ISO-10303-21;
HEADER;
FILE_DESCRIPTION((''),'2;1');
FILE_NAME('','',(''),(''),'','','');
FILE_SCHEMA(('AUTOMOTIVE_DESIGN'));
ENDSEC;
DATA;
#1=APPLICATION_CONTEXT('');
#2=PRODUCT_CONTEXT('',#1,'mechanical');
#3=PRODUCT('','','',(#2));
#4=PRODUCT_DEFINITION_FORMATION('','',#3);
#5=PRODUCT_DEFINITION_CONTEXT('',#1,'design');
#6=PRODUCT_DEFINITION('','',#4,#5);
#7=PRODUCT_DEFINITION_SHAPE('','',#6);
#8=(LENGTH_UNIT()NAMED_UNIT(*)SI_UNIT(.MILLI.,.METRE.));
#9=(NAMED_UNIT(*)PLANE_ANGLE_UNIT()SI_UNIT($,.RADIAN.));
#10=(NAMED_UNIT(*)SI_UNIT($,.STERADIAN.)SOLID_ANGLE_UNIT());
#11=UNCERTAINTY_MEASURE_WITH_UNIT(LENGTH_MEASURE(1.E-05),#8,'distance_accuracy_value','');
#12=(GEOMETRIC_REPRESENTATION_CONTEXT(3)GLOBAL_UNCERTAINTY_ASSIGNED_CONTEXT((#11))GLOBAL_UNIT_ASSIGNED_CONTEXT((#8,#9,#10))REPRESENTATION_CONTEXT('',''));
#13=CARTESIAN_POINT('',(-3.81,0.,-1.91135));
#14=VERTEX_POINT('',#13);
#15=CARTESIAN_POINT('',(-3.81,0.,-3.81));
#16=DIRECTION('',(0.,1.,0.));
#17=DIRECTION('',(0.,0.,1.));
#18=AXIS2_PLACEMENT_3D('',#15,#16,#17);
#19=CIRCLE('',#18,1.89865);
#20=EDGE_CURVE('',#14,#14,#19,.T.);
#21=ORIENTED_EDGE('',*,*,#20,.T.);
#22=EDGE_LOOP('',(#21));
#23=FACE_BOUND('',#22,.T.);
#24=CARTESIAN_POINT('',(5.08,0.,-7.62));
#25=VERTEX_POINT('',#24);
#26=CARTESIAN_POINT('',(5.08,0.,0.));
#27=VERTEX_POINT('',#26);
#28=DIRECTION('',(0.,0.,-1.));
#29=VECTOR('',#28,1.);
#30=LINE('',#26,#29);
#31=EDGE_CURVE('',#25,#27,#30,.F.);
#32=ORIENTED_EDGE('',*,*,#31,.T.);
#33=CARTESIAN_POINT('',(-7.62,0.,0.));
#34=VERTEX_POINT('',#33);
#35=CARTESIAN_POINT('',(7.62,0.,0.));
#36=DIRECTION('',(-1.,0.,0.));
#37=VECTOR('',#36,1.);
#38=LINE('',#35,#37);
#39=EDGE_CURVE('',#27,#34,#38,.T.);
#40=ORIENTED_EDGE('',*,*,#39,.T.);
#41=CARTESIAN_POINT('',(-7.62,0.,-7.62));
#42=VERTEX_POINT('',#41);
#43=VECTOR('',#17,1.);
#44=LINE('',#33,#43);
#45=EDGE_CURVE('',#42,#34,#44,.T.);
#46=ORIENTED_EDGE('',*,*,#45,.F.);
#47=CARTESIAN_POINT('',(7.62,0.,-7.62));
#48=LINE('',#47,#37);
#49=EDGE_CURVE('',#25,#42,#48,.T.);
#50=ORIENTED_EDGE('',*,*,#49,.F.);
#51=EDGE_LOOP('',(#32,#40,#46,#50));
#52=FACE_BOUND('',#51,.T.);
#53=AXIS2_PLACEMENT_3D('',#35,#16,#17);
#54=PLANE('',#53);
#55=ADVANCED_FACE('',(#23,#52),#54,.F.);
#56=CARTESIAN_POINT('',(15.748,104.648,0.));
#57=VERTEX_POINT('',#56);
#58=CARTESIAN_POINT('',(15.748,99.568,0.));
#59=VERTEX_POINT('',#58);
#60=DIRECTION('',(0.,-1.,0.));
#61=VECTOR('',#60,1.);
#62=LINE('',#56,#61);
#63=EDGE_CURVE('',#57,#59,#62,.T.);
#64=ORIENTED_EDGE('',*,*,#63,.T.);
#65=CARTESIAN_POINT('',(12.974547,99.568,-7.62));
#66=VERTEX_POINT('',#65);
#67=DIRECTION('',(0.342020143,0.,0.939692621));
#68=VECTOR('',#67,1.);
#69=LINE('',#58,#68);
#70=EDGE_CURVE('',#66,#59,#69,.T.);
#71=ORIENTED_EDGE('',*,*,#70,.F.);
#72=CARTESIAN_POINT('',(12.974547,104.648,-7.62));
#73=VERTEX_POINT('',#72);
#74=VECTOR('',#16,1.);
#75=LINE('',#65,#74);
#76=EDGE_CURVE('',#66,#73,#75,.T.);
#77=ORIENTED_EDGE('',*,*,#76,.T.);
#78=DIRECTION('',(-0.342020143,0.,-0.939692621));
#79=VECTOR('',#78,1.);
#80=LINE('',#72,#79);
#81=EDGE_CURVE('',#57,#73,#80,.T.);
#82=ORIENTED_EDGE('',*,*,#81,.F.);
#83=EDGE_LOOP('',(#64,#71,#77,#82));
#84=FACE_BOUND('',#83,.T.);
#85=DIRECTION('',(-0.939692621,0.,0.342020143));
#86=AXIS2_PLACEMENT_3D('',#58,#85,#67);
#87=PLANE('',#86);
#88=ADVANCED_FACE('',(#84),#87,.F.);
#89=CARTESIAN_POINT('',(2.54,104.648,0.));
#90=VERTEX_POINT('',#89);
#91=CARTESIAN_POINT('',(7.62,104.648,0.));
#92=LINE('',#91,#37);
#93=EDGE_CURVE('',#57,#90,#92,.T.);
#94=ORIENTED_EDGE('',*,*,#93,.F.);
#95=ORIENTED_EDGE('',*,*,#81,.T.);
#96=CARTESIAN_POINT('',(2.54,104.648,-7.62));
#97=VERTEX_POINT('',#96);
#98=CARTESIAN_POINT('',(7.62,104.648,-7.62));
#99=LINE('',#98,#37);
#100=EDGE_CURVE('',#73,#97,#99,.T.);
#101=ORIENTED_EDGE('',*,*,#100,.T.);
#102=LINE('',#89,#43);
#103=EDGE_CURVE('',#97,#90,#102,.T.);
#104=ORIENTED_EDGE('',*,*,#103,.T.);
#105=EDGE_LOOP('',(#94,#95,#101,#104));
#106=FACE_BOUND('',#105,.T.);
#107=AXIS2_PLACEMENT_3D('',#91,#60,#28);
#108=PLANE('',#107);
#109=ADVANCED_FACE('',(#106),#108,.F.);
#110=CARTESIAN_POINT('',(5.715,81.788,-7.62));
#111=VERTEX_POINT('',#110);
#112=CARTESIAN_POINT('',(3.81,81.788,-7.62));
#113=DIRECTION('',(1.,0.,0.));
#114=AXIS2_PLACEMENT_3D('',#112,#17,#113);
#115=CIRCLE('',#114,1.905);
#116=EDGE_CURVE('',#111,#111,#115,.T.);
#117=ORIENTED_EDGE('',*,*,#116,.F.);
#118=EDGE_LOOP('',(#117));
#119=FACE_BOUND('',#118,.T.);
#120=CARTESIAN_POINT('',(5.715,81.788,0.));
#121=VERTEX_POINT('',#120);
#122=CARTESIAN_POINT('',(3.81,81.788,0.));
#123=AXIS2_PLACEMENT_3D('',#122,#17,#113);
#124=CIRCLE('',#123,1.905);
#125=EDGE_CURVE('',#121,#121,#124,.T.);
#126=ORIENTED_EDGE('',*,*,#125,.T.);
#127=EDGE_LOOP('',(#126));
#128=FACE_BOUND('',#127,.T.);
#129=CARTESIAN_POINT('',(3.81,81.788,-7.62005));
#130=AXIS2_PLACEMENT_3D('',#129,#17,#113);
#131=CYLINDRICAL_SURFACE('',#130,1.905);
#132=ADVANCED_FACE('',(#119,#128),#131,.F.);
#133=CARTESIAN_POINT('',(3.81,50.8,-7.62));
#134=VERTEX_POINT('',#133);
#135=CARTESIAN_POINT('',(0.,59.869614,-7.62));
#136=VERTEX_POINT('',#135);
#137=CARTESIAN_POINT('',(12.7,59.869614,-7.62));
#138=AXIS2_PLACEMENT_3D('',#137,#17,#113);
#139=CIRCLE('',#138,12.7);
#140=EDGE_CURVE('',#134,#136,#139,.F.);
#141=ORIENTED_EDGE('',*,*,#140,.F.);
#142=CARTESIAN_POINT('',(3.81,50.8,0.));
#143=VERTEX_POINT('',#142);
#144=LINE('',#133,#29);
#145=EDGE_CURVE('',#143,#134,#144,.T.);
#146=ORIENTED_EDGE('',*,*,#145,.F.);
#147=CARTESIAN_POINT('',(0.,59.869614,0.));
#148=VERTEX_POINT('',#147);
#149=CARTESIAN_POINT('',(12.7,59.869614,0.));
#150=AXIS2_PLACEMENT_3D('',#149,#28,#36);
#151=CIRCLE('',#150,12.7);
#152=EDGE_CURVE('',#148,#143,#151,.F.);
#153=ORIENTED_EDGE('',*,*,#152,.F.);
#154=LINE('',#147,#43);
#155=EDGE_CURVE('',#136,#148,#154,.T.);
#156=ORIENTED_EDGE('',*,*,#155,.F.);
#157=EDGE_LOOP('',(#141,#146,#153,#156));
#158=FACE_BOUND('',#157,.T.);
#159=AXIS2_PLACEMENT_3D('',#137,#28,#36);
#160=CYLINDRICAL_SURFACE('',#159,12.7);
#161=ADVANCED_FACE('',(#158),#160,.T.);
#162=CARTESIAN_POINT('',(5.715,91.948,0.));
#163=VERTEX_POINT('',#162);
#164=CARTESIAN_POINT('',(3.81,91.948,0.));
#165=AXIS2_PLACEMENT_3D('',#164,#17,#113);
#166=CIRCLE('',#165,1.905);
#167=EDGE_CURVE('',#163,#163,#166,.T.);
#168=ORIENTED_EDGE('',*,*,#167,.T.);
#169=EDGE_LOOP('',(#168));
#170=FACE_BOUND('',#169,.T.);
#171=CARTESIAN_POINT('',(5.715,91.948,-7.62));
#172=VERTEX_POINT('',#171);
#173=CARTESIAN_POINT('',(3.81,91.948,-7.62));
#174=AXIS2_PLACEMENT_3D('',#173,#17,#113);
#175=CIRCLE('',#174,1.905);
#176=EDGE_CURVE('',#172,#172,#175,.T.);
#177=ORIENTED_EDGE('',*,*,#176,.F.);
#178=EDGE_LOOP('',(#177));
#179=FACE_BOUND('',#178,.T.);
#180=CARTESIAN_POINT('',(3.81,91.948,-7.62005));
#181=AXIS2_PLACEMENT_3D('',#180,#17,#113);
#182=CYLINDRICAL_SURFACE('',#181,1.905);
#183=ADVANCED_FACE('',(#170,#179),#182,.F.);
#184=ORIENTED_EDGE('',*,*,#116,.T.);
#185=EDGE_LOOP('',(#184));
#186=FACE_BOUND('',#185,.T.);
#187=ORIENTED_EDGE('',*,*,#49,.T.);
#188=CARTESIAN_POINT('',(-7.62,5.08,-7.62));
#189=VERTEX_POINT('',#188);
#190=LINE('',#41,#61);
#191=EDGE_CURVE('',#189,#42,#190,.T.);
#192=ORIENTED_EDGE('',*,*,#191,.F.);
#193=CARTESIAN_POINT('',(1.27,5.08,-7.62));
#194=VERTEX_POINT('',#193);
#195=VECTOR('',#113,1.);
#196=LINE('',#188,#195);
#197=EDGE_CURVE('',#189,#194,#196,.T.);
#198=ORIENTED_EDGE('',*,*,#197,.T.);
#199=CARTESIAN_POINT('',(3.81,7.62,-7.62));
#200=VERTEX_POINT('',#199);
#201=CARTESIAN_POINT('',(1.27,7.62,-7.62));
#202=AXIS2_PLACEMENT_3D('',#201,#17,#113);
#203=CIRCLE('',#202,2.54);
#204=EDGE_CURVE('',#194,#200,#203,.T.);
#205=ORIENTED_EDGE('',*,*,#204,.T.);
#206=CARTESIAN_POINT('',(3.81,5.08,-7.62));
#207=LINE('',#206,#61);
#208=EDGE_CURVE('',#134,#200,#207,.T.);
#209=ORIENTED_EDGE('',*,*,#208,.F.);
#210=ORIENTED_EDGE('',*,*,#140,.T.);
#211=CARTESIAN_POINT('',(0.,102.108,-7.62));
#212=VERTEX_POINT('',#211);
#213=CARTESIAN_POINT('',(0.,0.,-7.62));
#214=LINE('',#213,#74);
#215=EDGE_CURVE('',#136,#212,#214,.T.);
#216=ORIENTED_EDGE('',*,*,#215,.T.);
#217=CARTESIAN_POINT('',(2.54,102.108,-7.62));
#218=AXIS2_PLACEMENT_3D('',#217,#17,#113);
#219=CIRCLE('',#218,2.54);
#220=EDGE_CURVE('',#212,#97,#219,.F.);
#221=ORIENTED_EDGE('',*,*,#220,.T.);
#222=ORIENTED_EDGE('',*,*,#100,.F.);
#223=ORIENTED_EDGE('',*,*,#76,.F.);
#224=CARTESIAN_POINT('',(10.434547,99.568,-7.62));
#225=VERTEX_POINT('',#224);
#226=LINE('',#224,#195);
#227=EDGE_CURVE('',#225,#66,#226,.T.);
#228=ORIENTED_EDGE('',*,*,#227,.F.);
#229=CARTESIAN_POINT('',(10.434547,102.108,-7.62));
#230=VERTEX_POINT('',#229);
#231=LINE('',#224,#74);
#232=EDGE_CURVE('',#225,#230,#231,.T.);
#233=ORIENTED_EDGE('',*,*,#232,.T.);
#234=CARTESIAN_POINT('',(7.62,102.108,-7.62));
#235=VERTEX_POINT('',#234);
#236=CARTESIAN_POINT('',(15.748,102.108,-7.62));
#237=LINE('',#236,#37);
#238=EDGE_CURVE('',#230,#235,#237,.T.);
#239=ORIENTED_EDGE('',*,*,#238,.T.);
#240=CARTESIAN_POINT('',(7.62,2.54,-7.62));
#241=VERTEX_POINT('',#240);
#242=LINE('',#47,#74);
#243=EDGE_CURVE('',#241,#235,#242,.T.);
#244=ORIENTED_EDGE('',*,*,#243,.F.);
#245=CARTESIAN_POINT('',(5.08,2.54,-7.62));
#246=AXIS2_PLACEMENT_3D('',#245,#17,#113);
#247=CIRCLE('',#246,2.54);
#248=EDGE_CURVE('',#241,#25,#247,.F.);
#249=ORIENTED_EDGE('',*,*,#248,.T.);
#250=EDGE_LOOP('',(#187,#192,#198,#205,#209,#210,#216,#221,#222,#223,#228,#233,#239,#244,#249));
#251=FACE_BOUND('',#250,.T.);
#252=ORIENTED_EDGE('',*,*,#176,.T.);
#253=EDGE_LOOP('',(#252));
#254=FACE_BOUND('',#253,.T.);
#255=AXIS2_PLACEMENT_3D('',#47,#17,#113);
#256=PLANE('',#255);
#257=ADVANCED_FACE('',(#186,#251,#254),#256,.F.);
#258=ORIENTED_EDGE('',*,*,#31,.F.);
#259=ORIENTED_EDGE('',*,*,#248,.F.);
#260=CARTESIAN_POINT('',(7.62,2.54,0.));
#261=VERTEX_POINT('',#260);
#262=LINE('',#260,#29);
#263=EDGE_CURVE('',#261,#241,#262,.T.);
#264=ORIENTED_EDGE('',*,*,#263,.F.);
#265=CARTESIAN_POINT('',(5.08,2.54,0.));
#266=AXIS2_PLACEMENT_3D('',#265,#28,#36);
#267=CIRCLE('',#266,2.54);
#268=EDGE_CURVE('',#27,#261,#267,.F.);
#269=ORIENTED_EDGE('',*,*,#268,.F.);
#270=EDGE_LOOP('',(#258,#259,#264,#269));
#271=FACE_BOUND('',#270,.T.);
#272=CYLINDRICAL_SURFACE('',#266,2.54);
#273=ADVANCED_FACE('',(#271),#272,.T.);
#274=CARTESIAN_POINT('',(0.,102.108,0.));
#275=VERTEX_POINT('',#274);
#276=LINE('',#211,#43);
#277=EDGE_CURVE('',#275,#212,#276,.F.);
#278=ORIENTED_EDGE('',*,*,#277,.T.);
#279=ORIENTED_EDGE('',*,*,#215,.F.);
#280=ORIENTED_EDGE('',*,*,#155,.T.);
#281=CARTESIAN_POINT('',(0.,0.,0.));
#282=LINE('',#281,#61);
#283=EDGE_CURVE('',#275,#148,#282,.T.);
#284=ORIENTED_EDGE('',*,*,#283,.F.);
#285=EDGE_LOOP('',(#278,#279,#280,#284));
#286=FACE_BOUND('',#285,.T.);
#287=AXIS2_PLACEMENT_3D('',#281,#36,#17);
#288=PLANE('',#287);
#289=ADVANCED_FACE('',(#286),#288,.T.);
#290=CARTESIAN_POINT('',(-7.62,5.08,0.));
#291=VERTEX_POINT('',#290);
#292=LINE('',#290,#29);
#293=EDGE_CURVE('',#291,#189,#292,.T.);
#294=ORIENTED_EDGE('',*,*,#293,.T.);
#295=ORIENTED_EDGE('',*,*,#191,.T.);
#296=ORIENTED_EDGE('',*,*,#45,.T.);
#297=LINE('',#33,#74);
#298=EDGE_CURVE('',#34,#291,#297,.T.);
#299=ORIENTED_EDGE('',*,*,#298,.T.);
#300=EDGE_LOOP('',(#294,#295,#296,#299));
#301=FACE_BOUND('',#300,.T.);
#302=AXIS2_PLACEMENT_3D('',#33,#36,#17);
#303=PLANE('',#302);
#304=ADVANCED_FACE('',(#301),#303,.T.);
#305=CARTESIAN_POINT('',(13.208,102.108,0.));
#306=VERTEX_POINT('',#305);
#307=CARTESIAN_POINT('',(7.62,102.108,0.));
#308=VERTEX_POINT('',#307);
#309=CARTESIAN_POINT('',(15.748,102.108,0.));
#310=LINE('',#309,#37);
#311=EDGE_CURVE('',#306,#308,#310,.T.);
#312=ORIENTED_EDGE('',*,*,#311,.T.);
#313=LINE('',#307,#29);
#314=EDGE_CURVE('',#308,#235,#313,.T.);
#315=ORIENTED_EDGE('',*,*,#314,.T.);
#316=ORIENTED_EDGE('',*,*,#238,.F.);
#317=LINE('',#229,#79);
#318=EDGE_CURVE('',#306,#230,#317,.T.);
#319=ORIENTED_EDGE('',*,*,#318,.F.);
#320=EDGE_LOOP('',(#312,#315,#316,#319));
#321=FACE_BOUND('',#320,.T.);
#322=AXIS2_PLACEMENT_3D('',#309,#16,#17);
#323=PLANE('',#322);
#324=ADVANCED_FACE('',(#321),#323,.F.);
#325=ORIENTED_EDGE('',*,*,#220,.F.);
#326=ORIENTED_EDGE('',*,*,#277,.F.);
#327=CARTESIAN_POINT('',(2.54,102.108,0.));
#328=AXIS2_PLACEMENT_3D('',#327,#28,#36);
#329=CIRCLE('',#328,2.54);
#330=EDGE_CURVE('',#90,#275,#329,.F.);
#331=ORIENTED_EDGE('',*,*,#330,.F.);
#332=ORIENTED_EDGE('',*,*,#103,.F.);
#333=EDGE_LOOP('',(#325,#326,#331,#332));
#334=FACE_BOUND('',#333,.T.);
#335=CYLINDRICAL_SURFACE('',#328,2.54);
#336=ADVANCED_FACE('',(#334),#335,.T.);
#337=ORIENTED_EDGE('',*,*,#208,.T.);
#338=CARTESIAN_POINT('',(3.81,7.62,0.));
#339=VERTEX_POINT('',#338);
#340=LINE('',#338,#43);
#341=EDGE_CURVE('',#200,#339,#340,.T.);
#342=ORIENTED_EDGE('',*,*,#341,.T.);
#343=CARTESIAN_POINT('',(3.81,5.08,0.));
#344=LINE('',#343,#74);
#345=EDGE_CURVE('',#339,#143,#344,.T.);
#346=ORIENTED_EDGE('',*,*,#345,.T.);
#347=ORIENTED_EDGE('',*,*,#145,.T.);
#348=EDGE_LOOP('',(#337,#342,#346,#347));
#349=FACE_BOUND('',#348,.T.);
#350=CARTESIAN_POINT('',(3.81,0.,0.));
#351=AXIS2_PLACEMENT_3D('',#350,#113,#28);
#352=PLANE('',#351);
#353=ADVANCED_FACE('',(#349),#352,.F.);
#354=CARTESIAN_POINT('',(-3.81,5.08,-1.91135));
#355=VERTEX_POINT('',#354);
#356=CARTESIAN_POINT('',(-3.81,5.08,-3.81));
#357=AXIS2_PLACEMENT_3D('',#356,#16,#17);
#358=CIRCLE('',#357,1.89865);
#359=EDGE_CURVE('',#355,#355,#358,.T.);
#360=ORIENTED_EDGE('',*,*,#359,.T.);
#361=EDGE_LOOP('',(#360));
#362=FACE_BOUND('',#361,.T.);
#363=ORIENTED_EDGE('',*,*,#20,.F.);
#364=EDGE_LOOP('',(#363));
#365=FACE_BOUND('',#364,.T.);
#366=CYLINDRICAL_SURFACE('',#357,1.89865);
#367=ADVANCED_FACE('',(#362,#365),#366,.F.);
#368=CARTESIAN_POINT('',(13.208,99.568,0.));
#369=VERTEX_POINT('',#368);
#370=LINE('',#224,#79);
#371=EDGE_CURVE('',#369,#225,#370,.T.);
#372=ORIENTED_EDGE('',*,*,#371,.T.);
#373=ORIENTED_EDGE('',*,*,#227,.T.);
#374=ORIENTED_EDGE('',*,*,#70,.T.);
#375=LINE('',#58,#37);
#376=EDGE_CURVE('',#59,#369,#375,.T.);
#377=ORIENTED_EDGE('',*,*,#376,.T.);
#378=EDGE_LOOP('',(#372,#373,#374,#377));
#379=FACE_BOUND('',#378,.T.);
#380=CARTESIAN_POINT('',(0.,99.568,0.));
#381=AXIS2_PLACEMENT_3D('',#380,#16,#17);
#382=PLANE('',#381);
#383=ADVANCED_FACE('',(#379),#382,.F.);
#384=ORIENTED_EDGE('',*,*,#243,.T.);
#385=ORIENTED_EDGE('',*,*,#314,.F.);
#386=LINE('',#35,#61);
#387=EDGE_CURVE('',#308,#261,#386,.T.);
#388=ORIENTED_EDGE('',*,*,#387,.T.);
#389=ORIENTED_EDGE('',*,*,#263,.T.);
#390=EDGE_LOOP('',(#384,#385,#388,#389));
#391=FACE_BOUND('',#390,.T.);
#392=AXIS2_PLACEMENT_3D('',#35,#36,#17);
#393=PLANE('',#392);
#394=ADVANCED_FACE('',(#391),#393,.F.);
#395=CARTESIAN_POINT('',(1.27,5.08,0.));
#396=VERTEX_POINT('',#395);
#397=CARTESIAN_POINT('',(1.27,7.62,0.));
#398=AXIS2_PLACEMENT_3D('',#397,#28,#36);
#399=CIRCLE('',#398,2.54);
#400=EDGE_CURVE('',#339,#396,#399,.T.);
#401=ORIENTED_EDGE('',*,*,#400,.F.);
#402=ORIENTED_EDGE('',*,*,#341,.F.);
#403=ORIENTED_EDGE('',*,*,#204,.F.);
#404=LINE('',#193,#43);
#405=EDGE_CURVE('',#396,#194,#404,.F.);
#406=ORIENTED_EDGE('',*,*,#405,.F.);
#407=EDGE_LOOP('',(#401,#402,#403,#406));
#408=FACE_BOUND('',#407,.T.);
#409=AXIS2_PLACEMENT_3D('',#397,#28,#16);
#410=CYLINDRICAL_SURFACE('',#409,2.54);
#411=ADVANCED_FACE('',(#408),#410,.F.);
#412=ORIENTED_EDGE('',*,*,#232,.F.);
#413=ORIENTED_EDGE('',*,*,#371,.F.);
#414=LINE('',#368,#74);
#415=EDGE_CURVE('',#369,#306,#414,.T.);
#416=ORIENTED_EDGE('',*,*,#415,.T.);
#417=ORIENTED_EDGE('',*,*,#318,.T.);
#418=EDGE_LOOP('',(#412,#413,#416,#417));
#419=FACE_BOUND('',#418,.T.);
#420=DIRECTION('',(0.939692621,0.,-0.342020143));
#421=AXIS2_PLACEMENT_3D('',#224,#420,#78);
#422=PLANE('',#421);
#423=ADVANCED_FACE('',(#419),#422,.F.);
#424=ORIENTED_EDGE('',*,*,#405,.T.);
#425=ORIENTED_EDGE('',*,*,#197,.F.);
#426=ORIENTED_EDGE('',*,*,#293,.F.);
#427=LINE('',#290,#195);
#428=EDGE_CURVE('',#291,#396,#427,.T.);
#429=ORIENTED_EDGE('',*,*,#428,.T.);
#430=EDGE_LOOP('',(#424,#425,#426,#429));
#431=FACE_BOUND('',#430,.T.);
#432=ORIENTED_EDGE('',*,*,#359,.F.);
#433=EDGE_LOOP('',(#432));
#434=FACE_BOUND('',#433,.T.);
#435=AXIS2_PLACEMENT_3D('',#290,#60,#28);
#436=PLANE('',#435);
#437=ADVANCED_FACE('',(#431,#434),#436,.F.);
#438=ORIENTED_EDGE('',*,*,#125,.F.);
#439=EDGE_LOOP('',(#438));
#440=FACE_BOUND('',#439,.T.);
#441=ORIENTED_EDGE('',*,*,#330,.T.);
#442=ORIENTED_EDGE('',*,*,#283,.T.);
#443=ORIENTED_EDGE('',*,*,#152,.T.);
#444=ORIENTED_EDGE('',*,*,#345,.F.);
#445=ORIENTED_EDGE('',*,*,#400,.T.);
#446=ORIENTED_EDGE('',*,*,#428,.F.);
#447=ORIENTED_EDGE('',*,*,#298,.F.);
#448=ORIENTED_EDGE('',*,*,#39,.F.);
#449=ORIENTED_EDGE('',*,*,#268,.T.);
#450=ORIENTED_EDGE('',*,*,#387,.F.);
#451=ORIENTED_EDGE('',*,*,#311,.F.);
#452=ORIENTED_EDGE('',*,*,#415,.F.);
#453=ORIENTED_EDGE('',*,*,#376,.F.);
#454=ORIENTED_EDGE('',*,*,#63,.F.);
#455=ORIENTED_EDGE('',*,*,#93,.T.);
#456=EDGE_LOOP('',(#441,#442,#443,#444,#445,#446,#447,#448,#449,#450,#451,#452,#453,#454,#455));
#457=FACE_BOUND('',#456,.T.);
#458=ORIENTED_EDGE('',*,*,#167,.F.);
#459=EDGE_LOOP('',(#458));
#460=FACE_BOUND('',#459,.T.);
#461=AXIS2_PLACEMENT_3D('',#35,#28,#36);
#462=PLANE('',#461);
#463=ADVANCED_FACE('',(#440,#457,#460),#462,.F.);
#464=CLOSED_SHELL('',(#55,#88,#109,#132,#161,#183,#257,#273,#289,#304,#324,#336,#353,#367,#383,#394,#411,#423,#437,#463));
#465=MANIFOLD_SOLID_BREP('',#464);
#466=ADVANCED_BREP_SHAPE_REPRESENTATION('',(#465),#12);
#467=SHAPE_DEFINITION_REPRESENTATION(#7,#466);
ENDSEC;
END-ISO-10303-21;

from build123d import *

# Parameters (mm, degrees)
SKETCH1_W             = 7.62
SKETCH1_H             = 104.648
BOSS_EXTRUDE1_DEPTH   = 7.62
SKETCH2_W             = 7.62
SKETCH2_H             = 5.08
BOSS_EXTRUDE2_DEPTH   = 7.62
SKETCH4_W             = 7.62
SKETCH4_H             = 2.54
BOSS_EXTRUDE3_DEPTH   = 8.128
BOSS_EXTRUDE4_DEPTH   = 2.54
F_6_CLEARANCE_HOLE1_D = 3.7973
CUT_EXTRUDE1_DEPTH    = 2.54
SKETCH12_W            = 7.62
SKETCH12_H            = 45.72
CUT_EXTRUDE2_DEPTH    = 3.81
FILLET2_R             = 12.7
FILLET3_R             = 2.54
SKETCH14_R            = 1.905
CUT_EXTRUDE4_DEPTH    = 107.100272422


with BuildPart() as part:
    # Sketch1 → Boss-Extrude1 (new body)
    with BuildSketch(Plane(origin=(0, 0, 0), x_dir=(0, 0, -1), z_dir=(1, 0, 0))):
        with Locations((3.81, 52.324)):
            Rectangle(SKETCH1_W, SKETCH1_H)
    extrude(amount=BOSS_EXTRUDE1_DEPTH)

    # Sketch2 → Boss-Extrude2 (add)
    with BuildSketch(Plane.ZY):
        with Locations((-3.81, 2.54)):
            Rectangle(SKETCH2_W, SKETCH2_H)
    extrude(amount=BOSS_EXTRUDE2_DEPTH)

    # Sketch4 → Boss-Extrude3 (add)
    with BuildSketch(Plane(origin=(7.62, 0, 0), x_dir=(0, 0, -1), z_dir=(1, 0, 0))):
        with Locations((3.81, 103.378)):
            Rectangle(SKETCH4_W, SKETCH4_H)
    extrude(amount=BOSS_EXTRUDE3_DEPTH)

    # Sketch5 → Boss-Extrude4 (add)
    with BuildSketch(Plane.XZ.offset(-102.108)):
        Polygon((15.748, 0), (12.974546815, -7.62), (10.434546815, -7.62), (13.208, 0), align=None)
    extrude(amount=BOSS_EXTRUDE4_DEPTH)

    # #6 Clearance Hole1 (through all)
    with Locations(Plane(origin=(0, 5.08, 0), x_dir=(1, 0, 0), z_dir=(0, 1, 0))):
        with Locations((-3.81, 3.81)):
            Hole(F_6_CLEARANCE_HOLE1_D / 2)

    # Sketch8 → Cut-Extrude1 (cut)
    with BuildSketch(Plane.XZ.offset(-102.108)):
        Polygon((15.748, -7.62), (12.974546815, -7.62), (15.748, 0), align=None)
    extrude(amount=-CUT_EXTRUDE1_DEPTH, mode=Mode.SUBTRACT)

    # Sketch12 → Cut-Extrude2 (cut)
    with BuildSketch(Plane.ZY):
        with Locations((-3.81, 27.94)):
            Rectangle(SKETCH12_W, SKETCH12_H)
    extrude(amount=-CUT_EXTRUDE2_DEPTH, mode=Mode.SUBTRACT)

    # Fillet2
    # the kernel refuses this fillet: 12.7 mm, written as the material it takes off along each edge
    with BuildSketch(Plane(origin=(0, 50.8, 22.674035261), x_dir=(1, 0, 0), z_dir=(0, 0, -1))) as fillet2_piece_1:
        with BuildLine():
            CenterArc((12.7, -9.069614104), FILLET2_R, 134.427004001, 45.572995999)
            Line((0, -9.069614104), (-0.254, -9.069614104))
            Line((-0.254, -9.069614104), (-0.254, 0))
            Line((-0.254, 0), (0, 0.254))
            ThreePointArc((0, 0.254), (1.905, 0.254), (3.6322, 0.181392282))
            Line((3.6322, 0.181392282), (3.81, 0))
        make_face()
    extrude(amount=52.968070521, mode=Mode.SUBTRACT)

    # Fillet3
    fillet3_edges = [part.edges().sort_by_distance(p)[0] for p in [
        (3.81, 5.08, -3.81),
        (7.62, 0, -3.81),
        (0, 104.648, -3.81),
    ]]
    fillet(fillet3_edges, radius=FILLET3_R)

    # Sketch14 → Cut-Extrude4 (cut, through all)
    with BuildSketch(Plane.XY):
        with Locations((3.81, 91.948)):
            Circle(SKETCH14_R)
        with Locations((3.81, 81.788)):
            Circle(SKETCH14_R)
    extrude(amount=-CUT_EXTRUDE4_DEPTH, mode=Mode.SUBTRACT)


solid = part.part
